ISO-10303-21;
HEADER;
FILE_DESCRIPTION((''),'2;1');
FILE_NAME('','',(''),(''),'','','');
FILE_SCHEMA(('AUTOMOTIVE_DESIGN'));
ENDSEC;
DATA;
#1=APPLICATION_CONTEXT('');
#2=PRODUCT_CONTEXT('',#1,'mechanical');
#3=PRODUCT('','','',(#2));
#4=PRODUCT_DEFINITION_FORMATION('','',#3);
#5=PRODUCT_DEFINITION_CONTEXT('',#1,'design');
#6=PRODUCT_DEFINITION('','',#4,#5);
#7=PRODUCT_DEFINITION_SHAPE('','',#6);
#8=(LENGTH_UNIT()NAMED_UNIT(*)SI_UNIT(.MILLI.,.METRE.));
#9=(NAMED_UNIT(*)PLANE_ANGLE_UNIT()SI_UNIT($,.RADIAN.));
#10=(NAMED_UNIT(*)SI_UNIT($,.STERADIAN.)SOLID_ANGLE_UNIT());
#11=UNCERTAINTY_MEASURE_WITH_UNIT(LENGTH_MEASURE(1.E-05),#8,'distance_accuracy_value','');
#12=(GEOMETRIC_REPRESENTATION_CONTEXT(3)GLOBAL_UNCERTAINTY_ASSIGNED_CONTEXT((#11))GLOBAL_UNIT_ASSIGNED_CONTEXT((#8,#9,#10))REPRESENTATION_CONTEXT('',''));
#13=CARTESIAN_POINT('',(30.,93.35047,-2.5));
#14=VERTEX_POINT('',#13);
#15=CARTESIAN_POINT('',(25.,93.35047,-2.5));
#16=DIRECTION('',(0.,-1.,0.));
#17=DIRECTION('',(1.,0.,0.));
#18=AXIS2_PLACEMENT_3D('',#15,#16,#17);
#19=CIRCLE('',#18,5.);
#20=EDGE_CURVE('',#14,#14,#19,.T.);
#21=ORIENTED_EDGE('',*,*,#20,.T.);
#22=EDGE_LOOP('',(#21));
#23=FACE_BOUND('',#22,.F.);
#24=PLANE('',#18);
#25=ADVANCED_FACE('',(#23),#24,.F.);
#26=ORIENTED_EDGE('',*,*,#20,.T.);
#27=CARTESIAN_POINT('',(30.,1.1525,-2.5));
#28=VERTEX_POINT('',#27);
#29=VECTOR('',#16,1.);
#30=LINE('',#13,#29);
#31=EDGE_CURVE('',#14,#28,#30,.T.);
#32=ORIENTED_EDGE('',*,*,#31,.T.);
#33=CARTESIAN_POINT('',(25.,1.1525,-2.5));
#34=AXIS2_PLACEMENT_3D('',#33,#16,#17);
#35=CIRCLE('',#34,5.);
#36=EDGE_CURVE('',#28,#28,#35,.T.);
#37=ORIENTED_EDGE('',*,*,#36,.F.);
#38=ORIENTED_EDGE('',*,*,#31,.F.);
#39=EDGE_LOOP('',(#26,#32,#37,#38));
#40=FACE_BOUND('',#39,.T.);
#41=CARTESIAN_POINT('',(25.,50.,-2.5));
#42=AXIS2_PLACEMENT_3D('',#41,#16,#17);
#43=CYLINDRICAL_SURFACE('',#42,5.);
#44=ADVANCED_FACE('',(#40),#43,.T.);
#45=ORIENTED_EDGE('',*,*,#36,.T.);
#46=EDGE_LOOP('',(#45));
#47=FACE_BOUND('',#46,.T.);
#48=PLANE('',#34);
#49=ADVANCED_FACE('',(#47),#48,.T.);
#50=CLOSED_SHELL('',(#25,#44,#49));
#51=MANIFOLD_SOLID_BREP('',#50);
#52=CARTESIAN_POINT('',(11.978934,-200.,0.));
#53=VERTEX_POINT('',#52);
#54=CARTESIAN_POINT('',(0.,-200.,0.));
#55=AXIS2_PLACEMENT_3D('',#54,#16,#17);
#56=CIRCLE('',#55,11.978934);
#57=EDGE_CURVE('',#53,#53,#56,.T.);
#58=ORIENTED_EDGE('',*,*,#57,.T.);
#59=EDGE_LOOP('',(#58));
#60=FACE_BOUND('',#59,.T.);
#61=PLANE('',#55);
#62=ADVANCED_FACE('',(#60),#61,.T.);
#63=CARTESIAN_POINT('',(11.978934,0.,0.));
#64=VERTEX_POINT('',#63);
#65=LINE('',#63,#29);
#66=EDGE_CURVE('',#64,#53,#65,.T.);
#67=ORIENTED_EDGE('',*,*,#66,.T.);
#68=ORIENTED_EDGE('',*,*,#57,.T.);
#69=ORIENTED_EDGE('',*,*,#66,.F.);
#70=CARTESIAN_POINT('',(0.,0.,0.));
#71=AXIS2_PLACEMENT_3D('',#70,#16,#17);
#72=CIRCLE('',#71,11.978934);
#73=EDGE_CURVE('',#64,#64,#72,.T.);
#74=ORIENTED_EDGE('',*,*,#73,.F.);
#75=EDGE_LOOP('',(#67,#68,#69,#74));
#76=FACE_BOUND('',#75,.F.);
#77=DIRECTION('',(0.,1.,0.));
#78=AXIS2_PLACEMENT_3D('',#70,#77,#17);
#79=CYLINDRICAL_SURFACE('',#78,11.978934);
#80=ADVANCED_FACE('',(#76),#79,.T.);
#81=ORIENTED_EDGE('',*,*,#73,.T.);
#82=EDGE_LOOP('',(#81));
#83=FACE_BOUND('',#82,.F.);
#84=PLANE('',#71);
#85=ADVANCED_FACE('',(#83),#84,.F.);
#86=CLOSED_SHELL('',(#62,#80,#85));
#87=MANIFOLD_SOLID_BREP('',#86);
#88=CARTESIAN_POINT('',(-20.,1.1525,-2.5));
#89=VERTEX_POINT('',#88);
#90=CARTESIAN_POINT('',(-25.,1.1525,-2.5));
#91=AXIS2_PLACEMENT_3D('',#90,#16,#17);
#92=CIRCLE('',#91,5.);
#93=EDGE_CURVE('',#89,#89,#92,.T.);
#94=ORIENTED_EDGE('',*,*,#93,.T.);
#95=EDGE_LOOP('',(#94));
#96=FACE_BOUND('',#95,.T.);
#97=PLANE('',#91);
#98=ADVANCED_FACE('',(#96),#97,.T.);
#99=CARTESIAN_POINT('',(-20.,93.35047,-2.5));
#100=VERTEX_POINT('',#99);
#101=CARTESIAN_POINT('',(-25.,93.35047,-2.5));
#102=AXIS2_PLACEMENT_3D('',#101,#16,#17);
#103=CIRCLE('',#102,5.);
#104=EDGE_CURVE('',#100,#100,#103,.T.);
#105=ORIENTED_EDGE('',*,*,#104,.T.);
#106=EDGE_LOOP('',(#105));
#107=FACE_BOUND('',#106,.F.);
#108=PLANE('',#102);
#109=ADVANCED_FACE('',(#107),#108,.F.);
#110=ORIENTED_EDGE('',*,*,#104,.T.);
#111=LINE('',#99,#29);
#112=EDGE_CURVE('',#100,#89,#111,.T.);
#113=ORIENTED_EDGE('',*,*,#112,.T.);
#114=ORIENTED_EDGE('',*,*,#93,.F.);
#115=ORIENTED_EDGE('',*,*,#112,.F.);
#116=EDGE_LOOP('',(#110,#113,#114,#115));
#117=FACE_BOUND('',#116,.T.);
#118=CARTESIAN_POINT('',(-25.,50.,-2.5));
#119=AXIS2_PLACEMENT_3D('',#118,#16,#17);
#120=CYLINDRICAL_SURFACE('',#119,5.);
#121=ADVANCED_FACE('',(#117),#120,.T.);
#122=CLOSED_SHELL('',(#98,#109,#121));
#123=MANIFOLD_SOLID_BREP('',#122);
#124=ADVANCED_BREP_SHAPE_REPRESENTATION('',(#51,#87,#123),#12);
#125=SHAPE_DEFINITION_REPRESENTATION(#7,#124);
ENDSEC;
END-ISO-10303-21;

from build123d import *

# Parameters (mm, degrees)
F1_R          = 11.9789339658
F3_DEPTH      = 200
F2_R          = 5
F4_DEPTH      = 48.8475
F4_DEPTH_BACK = 43.35047


# Not quite as in the source:
# - a feature of the source that left no trace in its solid (it failed there, or was rolled back) is left out


with BuildPart() as f3:
    # F1 (on Front) → F3 (new body)
    with BuildSketch(Plane.XZ):
        Circle(F1_R)
    extrude(amount=F3_DEPTH)


with BuildPart() as f4:
    # F2 (on offset) → F4 (new body, two sides)
    with BuildSketch(Plane.XZ.offset(-50)) as f4_sk:
        with Locations((-25, -2.5)):
            Circle(F2_R)
    extrude(amount=F4_DEPTH)
    extrude(f4_sk.sketch, amount=-F4_DEPTH_BACK)


with BuildPart() as f4b:
    # F2 (on offset) → F4, piece 2 (new body, two sides)
    with BuildSketch(Plane.XZ.offset(-50)) as f4_2_sk:
        with Locations((25, -2.5)):
            Circle(F2_R)
    extrude(amount=F4_DEPTH)
    extrude(f4_2_sk.sketch, amount=-F4_DEPTH_BACK)


solid = Compound([f3.part, f4.part, f4b.part])
